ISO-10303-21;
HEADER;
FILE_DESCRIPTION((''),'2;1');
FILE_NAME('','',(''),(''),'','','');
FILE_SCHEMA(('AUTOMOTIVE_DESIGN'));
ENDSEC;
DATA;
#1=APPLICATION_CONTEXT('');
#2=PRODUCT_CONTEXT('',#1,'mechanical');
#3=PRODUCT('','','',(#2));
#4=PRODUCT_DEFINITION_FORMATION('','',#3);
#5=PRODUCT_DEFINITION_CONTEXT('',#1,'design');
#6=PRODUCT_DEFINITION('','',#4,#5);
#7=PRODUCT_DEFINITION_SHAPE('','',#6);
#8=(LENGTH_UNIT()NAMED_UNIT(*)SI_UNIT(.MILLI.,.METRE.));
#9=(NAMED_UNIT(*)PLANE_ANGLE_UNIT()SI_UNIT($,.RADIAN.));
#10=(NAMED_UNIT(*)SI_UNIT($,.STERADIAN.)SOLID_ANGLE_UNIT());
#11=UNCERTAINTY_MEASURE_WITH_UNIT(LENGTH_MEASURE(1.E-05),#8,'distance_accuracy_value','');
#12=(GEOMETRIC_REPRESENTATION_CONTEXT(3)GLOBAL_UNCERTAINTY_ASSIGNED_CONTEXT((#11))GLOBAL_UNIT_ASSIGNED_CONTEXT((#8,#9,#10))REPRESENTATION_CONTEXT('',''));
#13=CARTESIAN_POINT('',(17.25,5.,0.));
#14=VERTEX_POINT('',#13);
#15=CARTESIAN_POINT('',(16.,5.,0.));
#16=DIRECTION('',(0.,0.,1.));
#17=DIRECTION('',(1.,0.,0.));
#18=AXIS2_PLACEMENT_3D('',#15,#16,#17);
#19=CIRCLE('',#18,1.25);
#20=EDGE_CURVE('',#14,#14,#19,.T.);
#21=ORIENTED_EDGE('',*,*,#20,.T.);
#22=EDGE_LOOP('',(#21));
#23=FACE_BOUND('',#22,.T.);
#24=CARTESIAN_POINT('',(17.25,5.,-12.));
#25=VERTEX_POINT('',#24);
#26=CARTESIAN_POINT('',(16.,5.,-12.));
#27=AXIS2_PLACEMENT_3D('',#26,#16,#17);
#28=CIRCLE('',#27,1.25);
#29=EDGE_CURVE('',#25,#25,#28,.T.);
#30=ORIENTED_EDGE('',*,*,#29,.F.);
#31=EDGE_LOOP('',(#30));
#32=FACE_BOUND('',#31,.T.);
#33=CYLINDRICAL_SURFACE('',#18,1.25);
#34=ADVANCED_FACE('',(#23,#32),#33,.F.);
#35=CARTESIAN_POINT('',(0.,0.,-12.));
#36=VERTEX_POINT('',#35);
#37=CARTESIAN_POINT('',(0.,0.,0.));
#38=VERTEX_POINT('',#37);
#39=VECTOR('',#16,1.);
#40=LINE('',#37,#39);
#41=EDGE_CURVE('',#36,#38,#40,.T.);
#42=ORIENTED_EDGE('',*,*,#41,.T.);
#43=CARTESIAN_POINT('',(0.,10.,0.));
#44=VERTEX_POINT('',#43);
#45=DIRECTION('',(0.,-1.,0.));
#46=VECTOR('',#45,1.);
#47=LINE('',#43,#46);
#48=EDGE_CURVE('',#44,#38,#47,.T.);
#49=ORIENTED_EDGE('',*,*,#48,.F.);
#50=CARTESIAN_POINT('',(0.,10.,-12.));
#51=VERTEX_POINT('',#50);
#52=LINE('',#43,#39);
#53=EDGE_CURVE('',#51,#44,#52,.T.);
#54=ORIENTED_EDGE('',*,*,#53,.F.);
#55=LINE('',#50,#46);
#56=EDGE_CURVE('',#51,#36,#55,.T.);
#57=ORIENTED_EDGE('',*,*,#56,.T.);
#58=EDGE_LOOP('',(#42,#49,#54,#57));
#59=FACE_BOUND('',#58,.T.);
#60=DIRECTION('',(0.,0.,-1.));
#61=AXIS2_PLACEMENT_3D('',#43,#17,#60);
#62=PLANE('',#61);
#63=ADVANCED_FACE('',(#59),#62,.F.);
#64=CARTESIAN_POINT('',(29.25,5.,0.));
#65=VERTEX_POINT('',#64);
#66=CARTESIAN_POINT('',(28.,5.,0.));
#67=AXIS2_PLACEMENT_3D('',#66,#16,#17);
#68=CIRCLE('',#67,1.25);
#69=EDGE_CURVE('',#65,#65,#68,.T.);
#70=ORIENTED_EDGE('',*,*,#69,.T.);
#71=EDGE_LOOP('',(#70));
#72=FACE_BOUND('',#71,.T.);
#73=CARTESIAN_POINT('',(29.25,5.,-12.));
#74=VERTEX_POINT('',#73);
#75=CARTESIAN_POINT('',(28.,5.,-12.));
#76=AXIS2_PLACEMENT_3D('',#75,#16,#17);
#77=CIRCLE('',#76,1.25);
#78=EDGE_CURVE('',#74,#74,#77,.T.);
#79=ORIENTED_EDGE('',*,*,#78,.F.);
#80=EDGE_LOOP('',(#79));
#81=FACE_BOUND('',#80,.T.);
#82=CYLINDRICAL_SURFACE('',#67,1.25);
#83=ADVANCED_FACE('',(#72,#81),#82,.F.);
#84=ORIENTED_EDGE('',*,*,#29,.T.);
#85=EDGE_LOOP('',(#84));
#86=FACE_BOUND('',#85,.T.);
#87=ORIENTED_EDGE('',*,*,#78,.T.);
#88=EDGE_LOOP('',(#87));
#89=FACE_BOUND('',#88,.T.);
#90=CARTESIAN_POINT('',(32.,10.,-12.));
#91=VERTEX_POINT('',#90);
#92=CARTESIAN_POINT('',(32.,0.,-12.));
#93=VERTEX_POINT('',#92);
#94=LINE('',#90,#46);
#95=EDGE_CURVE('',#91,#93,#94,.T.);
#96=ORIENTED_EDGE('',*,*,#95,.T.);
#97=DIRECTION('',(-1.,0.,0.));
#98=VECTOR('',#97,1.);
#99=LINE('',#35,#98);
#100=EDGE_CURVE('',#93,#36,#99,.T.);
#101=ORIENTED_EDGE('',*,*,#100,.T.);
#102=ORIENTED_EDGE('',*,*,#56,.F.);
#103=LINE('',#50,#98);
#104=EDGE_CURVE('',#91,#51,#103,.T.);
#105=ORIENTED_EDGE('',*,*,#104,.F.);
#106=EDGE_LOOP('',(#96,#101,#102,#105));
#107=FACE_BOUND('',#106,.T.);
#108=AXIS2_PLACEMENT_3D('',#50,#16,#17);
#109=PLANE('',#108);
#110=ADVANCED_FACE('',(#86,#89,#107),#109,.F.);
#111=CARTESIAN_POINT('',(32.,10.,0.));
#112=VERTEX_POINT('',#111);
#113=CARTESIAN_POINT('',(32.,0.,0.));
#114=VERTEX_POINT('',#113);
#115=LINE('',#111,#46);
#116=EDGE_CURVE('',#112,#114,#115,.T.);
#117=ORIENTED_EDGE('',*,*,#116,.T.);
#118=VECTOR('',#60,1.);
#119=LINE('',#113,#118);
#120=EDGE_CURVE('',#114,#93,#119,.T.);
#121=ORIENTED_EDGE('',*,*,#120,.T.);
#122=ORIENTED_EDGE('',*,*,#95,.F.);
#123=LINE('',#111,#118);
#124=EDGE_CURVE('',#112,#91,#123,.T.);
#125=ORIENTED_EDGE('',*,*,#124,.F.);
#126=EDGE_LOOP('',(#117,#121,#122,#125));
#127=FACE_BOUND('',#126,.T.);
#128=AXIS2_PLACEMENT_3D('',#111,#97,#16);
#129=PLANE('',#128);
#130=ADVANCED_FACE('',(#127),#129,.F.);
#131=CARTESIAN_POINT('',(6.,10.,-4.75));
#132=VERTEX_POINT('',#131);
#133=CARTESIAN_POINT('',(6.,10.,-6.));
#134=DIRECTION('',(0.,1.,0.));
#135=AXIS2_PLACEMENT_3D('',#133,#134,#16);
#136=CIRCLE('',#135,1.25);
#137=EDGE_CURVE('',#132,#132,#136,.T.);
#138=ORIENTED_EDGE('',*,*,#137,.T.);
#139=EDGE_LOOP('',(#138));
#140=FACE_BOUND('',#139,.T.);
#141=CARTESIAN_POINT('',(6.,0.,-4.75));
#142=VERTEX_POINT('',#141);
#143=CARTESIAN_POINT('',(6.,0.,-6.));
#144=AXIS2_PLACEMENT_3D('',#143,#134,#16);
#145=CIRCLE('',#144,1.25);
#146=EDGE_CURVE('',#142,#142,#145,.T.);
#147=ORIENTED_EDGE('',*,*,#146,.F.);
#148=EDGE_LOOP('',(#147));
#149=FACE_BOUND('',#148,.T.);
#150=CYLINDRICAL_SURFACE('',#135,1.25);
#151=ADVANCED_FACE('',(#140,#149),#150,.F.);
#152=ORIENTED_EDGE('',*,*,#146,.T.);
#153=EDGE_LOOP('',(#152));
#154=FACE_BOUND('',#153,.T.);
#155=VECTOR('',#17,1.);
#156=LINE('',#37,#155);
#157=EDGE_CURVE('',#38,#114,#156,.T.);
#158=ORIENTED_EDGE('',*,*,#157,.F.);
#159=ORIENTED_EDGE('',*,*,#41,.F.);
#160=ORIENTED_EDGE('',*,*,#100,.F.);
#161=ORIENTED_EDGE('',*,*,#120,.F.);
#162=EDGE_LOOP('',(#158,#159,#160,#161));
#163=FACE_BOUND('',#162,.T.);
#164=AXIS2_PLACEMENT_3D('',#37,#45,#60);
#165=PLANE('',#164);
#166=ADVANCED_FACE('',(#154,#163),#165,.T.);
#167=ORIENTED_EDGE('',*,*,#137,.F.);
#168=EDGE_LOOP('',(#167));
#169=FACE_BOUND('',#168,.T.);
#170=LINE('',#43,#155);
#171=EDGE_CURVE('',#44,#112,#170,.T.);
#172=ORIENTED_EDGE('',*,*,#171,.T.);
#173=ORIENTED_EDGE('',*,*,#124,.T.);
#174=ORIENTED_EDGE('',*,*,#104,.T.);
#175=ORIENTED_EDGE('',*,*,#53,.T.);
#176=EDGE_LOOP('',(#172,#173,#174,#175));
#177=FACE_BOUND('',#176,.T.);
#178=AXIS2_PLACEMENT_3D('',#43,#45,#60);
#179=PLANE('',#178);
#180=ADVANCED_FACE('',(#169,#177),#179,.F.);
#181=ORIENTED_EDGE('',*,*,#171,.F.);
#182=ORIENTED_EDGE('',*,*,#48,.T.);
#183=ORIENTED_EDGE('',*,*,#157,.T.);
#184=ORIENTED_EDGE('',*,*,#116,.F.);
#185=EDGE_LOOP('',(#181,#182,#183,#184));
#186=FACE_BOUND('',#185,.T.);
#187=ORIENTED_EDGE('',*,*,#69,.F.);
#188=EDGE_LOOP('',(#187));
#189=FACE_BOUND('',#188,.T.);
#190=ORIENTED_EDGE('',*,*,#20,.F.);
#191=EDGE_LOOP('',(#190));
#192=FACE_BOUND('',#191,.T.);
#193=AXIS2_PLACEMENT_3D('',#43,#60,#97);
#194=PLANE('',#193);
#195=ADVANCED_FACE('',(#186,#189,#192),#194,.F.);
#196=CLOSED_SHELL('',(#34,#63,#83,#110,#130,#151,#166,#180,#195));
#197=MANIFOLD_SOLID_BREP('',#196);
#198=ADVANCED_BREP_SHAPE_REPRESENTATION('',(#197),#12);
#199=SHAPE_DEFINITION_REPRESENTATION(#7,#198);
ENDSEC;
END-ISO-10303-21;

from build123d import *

# Parameters (mm, degrees)
SKETCH1_W                           = 32
SKETCH1_H                           = 12
BOSS_EXTRUDE1_DEPTH                 = 10
TAP_DRILL_FOR_M3X0_5_TAP1_D         = 2.5
TAP_START                           = -12
TAP_DRILL_FOR_M3X0_5_TAP2_OUTLINE_R = 1.25
TAP_DRILL_FOR_M3X0_5_TAP2_DEPTH     = 12


# Read off the part's stored shape, not the designer's step: Tap Drill for M3x0.5 Tap2
with BuildPart() as part:
    # Sketch1 → Boss-Extrude1 (new body)
    with BuildSketch(Plane(origin=(0, 0, 0), x_dir=(1, 0, 0), z_dir=(0, 1, 0))):
        with Locations((16, 6)):
            Rectangle(SKETCH1_W, SKETCH1_H)
    extrude(amount=BOSS_EXTRUDE1_DEPTH)

    # Tap Drill for M3x0.5 Tap1 (through all)
    with Locations(Plane(origin=(0, 10, 0), x_dir=(1, 0, 0), z_dir=(0, 1, 0))):
        with Locations((6, 6)):
            Hole(TAP_DRILL_FOR_M3X0_5_TAP1_D / 2)

    # Tap Drill for M3x0.5 Tap2 outline → Tap Drill for M3x0.5 Tap2 (cut)
    with BuildSketch(Plane.XY.offset(TAP_START)):
        with Locations((16, 5)):
            Circle(TAP_DRILL_FOR_M3X0_5_TAP2_OUTLINE_R)
        with Locations((28, 5)):
            Circle(TAP_DRILL_FOR_M3X0_5_TAP2_OUTLINE_R)
    extrude(amount=TAP_DRILL_FOR_M3X0_5_TAP2_DEPTH, mode=Mode.SUBTRACT)


solid = part.part
